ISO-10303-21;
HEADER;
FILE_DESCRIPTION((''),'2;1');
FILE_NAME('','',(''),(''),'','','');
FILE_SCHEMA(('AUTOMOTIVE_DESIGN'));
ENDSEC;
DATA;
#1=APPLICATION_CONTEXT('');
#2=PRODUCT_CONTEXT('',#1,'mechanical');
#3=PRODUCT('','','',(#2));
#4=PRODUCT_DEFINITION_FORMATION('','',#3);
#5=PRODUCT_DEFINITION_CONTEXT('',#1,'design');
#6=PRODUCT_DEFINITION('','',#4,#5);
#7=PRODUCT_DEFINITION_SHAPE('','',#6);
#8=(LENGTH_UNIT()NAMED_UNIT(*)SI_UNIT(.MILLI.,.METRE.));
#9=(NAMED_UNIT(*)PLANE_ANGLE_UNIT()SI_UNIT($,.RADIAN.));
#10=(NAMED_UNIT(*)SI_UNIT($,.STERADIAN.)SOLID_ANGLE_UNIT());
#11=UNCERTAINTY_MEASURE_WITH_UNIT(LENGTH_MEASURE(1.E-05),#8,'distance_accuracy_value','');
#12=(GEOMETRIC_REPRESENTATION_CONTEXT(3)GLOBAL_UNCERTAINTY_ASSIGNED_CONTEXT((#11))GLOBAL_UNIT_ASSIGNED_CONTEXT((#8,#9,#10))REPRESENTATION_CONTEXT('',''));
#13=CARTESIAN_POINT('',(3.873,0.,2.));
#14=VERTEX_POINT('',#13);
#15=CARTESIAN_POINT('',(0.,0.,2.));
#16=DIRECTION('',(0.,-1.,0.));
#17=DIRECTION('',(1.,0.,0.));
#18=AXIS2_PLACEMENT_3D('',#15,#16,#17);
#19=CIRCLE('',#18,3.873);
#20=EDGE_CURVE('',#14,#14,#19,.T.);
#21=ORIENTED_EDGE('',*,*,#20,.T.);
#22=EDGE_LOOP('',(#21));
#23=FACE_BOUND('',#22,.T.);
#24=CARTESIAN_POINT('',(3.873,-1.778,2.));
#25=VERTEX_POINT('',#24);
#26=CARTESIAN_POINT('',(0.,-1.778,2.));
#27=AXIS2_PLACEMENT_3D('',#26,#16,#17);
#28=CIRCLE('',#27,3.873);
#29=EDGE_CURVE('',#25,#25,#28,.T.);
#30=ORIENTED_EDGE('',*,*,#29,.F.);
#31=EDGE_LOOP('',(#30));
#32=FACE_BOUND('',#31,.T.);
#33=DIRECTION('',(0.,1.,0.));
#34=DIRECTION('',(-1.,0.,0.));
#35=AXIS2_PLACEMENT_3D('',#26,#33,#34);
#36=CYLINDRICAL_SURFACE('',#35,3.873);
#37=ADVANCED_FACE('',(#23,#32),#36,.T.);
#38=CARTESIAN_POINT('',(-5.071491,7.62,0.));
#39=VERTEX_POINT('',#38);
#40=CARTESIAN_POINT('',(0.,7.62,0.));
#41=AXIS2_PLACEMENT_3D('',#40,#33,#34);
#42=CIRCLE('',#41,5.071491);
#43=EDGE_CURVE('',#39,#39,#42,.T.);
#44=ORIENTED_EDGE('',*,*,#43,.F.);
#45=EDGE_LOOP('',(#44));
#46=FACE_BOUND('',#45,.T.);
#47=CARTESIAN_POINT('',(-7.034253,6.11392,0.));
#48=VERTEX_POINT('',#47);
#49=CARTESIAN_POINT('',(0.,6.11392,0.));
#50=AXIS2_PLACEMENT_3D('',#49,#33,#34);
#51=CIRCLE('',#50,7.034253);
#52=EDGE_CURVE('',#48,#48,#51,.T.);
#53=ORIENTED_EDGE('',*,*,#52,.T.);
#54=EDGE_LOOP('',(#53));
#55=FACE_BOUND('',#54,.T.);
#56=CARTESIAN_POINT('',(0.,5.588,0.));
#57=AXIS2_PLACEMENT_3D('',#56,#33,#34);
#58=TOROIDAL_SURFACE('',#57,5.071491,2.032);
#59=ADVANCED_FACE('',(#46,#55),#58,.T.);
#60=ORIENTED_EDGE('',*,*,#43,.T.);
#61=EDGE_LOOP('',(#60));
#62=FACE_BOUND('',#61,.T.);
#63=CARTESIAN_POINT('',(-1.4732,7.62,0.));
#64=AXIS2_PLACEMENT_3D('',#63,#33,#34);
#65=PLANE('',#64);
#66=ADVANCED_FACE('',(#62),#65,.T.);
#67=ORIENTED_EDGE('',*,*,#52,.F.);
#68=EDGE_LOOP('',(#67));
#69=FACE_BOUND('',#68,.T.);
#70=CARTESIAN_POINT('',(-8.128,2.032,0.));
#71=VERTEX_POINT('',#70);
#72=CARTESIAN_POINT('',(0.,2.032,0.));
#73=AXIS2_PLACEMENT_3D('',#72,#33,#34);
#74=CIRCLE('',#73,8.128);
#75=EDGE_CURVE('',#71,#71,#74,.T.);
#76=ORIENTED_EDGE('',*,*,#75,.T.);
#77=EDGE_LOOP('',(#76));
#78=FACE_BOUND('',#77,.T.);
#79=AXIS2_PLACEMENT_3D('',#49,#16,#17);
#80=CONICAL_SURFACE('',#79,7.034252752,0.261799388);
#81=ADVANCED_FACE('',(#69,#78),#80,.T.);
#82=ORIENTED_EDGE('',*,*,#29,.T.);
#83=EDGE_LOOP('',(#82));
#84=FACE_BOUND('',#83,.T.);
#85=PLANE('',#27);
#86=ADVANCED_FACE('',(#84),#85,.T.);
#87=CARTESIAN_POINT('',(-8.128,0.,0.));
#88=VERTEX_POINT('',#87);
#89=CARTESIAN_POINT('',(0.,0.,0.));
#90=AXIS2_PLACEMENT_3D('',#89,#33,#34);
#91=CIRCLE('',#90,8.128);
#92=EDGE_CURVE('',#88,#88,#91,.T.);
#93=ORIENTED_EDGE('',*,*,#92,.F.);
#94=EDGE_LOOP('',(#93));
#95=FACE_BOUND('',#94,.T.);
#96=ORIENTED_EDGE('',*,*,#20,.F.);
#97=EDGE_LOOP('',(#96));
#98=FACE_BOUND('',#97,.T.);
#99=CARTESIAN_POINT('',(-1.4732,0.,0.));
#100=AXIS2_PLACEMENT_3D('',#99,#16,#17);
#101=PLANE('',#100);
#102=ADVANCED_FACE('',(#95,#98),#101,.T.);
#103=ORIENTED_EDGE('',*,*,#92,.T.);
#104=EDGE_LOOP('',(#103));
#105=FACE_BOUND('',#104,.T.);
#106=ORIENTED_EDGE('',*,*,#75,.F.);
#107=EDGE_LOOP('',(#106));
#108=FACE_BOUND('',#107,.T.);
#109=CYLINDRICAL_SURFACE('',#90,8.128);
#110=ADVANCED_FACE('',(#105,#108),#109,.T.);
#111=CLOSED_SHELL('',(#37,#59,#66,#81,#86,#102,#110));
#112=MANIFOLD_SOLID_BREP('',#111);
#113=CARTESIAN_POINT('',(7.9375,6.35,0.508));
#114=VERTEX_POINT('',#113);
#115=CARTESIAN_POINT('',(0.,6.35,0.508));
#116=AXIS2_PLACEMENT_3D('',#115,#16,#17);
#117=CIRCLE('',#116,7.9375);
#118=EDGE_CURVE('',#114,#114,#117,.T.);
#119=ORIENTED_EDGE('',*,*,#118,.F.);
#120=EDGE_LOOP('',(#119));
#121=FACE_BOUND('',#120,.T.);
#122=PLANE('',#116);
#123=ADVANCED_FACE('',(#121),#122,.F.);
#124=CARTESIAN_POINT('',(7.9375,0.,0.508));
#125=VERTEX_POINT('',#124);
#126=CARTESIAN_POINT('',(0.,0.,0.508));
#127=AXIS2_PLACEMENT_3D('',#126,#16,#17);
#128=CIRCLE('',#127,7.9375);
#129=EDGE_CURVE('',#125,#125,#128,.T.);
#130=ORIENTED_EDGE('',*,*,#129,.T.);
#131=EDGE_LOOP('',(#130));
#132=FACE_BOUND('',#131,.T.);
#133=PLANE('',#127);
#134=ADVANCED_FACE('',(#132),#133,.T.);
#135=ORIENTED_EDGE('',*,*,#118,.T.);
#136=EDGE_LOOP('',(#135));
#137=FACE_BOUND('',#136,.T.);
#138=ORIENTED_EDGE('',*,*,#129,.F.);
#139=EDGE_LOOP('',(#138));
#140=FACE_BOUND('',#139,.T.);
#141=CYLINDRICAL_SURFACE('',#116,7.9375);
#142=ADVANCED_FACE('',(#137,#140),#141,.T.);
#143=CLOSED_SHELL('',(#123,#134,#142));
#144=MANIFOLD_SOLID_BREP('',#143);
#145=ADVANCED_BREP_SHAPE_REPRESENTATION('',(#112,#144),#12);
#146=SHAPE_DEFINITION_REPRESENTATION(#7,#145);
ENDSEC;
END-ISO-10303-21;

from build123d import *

# Parameters (mm, degrees)
DELETEFACE1_OUTLINE_R = 1.4732
DELETEFACE1_DEPTH     = 7.62
SKETCH3_R             = 3.873
BOSS_EXTRUDE1_DEPTH   = 1.778
SKETCH4_R             = 7.9375
BOSS_EXTRUDE2_DEPTH   = 6.35


# Read off the part's stored shape, not the designer's step: DeleteFace1
with BuildPart() as part:
    # Sketch1 → Revolve1 (revolve)
    with BuildSketch(Plane.XY):
        with BuildLine():
            Line((-1.4732, 0), (-8.128, 0))
            Line((-8.128, 0), (-8.128, 2.032))
            Line((-8.128, 2.032), (-7.034252752, 6.1139203))
            ThreePointArc((-7.034252752, 6.1139203), (-6.308494697, 7.200093987), (-5.071491473, 7.62))
            Line((-5.071491473, 7.62), (-1.4732, 7.62))
            Line((-1.4732, 7.62), (-1.4732, 0))
        make_face()
    revolve(axis=Axis((0, 0, 0), (0, -1, 0)))

    # DeleteFace1 outline → DeleteFace1 (add)
    with BuildSketch(Plane(origin=(0, 0, 0), x_dir=(1, 0, 0), z_dir=(0, 1, 0))):
        Circle(DELETEFACE1_OUTLINE_R)
    extrude(amount=DELETEFACE1_DEPTH)

    # Sketch3 → Boss-Extrude1 (add)
    with BuildSketch(Plane.XZ):
        with Locations((0, 2)):
            Circle(SKETCH3_R)
    extrude(amount=BOSS_EXTRUDE1_DEPTH)


with BuildPart() as body_2:
    # Sketch4 → Boss-Extrude2 (new body)
    with BuildSketch(Plane.XZ):
        with Locations((0, 0.508)):
            Circle(SKETCH4_R)
    extrude(amount=-BOSS_EXTRUDE2_DEPTH)


solid = Compound([part.part, body_2.part])
